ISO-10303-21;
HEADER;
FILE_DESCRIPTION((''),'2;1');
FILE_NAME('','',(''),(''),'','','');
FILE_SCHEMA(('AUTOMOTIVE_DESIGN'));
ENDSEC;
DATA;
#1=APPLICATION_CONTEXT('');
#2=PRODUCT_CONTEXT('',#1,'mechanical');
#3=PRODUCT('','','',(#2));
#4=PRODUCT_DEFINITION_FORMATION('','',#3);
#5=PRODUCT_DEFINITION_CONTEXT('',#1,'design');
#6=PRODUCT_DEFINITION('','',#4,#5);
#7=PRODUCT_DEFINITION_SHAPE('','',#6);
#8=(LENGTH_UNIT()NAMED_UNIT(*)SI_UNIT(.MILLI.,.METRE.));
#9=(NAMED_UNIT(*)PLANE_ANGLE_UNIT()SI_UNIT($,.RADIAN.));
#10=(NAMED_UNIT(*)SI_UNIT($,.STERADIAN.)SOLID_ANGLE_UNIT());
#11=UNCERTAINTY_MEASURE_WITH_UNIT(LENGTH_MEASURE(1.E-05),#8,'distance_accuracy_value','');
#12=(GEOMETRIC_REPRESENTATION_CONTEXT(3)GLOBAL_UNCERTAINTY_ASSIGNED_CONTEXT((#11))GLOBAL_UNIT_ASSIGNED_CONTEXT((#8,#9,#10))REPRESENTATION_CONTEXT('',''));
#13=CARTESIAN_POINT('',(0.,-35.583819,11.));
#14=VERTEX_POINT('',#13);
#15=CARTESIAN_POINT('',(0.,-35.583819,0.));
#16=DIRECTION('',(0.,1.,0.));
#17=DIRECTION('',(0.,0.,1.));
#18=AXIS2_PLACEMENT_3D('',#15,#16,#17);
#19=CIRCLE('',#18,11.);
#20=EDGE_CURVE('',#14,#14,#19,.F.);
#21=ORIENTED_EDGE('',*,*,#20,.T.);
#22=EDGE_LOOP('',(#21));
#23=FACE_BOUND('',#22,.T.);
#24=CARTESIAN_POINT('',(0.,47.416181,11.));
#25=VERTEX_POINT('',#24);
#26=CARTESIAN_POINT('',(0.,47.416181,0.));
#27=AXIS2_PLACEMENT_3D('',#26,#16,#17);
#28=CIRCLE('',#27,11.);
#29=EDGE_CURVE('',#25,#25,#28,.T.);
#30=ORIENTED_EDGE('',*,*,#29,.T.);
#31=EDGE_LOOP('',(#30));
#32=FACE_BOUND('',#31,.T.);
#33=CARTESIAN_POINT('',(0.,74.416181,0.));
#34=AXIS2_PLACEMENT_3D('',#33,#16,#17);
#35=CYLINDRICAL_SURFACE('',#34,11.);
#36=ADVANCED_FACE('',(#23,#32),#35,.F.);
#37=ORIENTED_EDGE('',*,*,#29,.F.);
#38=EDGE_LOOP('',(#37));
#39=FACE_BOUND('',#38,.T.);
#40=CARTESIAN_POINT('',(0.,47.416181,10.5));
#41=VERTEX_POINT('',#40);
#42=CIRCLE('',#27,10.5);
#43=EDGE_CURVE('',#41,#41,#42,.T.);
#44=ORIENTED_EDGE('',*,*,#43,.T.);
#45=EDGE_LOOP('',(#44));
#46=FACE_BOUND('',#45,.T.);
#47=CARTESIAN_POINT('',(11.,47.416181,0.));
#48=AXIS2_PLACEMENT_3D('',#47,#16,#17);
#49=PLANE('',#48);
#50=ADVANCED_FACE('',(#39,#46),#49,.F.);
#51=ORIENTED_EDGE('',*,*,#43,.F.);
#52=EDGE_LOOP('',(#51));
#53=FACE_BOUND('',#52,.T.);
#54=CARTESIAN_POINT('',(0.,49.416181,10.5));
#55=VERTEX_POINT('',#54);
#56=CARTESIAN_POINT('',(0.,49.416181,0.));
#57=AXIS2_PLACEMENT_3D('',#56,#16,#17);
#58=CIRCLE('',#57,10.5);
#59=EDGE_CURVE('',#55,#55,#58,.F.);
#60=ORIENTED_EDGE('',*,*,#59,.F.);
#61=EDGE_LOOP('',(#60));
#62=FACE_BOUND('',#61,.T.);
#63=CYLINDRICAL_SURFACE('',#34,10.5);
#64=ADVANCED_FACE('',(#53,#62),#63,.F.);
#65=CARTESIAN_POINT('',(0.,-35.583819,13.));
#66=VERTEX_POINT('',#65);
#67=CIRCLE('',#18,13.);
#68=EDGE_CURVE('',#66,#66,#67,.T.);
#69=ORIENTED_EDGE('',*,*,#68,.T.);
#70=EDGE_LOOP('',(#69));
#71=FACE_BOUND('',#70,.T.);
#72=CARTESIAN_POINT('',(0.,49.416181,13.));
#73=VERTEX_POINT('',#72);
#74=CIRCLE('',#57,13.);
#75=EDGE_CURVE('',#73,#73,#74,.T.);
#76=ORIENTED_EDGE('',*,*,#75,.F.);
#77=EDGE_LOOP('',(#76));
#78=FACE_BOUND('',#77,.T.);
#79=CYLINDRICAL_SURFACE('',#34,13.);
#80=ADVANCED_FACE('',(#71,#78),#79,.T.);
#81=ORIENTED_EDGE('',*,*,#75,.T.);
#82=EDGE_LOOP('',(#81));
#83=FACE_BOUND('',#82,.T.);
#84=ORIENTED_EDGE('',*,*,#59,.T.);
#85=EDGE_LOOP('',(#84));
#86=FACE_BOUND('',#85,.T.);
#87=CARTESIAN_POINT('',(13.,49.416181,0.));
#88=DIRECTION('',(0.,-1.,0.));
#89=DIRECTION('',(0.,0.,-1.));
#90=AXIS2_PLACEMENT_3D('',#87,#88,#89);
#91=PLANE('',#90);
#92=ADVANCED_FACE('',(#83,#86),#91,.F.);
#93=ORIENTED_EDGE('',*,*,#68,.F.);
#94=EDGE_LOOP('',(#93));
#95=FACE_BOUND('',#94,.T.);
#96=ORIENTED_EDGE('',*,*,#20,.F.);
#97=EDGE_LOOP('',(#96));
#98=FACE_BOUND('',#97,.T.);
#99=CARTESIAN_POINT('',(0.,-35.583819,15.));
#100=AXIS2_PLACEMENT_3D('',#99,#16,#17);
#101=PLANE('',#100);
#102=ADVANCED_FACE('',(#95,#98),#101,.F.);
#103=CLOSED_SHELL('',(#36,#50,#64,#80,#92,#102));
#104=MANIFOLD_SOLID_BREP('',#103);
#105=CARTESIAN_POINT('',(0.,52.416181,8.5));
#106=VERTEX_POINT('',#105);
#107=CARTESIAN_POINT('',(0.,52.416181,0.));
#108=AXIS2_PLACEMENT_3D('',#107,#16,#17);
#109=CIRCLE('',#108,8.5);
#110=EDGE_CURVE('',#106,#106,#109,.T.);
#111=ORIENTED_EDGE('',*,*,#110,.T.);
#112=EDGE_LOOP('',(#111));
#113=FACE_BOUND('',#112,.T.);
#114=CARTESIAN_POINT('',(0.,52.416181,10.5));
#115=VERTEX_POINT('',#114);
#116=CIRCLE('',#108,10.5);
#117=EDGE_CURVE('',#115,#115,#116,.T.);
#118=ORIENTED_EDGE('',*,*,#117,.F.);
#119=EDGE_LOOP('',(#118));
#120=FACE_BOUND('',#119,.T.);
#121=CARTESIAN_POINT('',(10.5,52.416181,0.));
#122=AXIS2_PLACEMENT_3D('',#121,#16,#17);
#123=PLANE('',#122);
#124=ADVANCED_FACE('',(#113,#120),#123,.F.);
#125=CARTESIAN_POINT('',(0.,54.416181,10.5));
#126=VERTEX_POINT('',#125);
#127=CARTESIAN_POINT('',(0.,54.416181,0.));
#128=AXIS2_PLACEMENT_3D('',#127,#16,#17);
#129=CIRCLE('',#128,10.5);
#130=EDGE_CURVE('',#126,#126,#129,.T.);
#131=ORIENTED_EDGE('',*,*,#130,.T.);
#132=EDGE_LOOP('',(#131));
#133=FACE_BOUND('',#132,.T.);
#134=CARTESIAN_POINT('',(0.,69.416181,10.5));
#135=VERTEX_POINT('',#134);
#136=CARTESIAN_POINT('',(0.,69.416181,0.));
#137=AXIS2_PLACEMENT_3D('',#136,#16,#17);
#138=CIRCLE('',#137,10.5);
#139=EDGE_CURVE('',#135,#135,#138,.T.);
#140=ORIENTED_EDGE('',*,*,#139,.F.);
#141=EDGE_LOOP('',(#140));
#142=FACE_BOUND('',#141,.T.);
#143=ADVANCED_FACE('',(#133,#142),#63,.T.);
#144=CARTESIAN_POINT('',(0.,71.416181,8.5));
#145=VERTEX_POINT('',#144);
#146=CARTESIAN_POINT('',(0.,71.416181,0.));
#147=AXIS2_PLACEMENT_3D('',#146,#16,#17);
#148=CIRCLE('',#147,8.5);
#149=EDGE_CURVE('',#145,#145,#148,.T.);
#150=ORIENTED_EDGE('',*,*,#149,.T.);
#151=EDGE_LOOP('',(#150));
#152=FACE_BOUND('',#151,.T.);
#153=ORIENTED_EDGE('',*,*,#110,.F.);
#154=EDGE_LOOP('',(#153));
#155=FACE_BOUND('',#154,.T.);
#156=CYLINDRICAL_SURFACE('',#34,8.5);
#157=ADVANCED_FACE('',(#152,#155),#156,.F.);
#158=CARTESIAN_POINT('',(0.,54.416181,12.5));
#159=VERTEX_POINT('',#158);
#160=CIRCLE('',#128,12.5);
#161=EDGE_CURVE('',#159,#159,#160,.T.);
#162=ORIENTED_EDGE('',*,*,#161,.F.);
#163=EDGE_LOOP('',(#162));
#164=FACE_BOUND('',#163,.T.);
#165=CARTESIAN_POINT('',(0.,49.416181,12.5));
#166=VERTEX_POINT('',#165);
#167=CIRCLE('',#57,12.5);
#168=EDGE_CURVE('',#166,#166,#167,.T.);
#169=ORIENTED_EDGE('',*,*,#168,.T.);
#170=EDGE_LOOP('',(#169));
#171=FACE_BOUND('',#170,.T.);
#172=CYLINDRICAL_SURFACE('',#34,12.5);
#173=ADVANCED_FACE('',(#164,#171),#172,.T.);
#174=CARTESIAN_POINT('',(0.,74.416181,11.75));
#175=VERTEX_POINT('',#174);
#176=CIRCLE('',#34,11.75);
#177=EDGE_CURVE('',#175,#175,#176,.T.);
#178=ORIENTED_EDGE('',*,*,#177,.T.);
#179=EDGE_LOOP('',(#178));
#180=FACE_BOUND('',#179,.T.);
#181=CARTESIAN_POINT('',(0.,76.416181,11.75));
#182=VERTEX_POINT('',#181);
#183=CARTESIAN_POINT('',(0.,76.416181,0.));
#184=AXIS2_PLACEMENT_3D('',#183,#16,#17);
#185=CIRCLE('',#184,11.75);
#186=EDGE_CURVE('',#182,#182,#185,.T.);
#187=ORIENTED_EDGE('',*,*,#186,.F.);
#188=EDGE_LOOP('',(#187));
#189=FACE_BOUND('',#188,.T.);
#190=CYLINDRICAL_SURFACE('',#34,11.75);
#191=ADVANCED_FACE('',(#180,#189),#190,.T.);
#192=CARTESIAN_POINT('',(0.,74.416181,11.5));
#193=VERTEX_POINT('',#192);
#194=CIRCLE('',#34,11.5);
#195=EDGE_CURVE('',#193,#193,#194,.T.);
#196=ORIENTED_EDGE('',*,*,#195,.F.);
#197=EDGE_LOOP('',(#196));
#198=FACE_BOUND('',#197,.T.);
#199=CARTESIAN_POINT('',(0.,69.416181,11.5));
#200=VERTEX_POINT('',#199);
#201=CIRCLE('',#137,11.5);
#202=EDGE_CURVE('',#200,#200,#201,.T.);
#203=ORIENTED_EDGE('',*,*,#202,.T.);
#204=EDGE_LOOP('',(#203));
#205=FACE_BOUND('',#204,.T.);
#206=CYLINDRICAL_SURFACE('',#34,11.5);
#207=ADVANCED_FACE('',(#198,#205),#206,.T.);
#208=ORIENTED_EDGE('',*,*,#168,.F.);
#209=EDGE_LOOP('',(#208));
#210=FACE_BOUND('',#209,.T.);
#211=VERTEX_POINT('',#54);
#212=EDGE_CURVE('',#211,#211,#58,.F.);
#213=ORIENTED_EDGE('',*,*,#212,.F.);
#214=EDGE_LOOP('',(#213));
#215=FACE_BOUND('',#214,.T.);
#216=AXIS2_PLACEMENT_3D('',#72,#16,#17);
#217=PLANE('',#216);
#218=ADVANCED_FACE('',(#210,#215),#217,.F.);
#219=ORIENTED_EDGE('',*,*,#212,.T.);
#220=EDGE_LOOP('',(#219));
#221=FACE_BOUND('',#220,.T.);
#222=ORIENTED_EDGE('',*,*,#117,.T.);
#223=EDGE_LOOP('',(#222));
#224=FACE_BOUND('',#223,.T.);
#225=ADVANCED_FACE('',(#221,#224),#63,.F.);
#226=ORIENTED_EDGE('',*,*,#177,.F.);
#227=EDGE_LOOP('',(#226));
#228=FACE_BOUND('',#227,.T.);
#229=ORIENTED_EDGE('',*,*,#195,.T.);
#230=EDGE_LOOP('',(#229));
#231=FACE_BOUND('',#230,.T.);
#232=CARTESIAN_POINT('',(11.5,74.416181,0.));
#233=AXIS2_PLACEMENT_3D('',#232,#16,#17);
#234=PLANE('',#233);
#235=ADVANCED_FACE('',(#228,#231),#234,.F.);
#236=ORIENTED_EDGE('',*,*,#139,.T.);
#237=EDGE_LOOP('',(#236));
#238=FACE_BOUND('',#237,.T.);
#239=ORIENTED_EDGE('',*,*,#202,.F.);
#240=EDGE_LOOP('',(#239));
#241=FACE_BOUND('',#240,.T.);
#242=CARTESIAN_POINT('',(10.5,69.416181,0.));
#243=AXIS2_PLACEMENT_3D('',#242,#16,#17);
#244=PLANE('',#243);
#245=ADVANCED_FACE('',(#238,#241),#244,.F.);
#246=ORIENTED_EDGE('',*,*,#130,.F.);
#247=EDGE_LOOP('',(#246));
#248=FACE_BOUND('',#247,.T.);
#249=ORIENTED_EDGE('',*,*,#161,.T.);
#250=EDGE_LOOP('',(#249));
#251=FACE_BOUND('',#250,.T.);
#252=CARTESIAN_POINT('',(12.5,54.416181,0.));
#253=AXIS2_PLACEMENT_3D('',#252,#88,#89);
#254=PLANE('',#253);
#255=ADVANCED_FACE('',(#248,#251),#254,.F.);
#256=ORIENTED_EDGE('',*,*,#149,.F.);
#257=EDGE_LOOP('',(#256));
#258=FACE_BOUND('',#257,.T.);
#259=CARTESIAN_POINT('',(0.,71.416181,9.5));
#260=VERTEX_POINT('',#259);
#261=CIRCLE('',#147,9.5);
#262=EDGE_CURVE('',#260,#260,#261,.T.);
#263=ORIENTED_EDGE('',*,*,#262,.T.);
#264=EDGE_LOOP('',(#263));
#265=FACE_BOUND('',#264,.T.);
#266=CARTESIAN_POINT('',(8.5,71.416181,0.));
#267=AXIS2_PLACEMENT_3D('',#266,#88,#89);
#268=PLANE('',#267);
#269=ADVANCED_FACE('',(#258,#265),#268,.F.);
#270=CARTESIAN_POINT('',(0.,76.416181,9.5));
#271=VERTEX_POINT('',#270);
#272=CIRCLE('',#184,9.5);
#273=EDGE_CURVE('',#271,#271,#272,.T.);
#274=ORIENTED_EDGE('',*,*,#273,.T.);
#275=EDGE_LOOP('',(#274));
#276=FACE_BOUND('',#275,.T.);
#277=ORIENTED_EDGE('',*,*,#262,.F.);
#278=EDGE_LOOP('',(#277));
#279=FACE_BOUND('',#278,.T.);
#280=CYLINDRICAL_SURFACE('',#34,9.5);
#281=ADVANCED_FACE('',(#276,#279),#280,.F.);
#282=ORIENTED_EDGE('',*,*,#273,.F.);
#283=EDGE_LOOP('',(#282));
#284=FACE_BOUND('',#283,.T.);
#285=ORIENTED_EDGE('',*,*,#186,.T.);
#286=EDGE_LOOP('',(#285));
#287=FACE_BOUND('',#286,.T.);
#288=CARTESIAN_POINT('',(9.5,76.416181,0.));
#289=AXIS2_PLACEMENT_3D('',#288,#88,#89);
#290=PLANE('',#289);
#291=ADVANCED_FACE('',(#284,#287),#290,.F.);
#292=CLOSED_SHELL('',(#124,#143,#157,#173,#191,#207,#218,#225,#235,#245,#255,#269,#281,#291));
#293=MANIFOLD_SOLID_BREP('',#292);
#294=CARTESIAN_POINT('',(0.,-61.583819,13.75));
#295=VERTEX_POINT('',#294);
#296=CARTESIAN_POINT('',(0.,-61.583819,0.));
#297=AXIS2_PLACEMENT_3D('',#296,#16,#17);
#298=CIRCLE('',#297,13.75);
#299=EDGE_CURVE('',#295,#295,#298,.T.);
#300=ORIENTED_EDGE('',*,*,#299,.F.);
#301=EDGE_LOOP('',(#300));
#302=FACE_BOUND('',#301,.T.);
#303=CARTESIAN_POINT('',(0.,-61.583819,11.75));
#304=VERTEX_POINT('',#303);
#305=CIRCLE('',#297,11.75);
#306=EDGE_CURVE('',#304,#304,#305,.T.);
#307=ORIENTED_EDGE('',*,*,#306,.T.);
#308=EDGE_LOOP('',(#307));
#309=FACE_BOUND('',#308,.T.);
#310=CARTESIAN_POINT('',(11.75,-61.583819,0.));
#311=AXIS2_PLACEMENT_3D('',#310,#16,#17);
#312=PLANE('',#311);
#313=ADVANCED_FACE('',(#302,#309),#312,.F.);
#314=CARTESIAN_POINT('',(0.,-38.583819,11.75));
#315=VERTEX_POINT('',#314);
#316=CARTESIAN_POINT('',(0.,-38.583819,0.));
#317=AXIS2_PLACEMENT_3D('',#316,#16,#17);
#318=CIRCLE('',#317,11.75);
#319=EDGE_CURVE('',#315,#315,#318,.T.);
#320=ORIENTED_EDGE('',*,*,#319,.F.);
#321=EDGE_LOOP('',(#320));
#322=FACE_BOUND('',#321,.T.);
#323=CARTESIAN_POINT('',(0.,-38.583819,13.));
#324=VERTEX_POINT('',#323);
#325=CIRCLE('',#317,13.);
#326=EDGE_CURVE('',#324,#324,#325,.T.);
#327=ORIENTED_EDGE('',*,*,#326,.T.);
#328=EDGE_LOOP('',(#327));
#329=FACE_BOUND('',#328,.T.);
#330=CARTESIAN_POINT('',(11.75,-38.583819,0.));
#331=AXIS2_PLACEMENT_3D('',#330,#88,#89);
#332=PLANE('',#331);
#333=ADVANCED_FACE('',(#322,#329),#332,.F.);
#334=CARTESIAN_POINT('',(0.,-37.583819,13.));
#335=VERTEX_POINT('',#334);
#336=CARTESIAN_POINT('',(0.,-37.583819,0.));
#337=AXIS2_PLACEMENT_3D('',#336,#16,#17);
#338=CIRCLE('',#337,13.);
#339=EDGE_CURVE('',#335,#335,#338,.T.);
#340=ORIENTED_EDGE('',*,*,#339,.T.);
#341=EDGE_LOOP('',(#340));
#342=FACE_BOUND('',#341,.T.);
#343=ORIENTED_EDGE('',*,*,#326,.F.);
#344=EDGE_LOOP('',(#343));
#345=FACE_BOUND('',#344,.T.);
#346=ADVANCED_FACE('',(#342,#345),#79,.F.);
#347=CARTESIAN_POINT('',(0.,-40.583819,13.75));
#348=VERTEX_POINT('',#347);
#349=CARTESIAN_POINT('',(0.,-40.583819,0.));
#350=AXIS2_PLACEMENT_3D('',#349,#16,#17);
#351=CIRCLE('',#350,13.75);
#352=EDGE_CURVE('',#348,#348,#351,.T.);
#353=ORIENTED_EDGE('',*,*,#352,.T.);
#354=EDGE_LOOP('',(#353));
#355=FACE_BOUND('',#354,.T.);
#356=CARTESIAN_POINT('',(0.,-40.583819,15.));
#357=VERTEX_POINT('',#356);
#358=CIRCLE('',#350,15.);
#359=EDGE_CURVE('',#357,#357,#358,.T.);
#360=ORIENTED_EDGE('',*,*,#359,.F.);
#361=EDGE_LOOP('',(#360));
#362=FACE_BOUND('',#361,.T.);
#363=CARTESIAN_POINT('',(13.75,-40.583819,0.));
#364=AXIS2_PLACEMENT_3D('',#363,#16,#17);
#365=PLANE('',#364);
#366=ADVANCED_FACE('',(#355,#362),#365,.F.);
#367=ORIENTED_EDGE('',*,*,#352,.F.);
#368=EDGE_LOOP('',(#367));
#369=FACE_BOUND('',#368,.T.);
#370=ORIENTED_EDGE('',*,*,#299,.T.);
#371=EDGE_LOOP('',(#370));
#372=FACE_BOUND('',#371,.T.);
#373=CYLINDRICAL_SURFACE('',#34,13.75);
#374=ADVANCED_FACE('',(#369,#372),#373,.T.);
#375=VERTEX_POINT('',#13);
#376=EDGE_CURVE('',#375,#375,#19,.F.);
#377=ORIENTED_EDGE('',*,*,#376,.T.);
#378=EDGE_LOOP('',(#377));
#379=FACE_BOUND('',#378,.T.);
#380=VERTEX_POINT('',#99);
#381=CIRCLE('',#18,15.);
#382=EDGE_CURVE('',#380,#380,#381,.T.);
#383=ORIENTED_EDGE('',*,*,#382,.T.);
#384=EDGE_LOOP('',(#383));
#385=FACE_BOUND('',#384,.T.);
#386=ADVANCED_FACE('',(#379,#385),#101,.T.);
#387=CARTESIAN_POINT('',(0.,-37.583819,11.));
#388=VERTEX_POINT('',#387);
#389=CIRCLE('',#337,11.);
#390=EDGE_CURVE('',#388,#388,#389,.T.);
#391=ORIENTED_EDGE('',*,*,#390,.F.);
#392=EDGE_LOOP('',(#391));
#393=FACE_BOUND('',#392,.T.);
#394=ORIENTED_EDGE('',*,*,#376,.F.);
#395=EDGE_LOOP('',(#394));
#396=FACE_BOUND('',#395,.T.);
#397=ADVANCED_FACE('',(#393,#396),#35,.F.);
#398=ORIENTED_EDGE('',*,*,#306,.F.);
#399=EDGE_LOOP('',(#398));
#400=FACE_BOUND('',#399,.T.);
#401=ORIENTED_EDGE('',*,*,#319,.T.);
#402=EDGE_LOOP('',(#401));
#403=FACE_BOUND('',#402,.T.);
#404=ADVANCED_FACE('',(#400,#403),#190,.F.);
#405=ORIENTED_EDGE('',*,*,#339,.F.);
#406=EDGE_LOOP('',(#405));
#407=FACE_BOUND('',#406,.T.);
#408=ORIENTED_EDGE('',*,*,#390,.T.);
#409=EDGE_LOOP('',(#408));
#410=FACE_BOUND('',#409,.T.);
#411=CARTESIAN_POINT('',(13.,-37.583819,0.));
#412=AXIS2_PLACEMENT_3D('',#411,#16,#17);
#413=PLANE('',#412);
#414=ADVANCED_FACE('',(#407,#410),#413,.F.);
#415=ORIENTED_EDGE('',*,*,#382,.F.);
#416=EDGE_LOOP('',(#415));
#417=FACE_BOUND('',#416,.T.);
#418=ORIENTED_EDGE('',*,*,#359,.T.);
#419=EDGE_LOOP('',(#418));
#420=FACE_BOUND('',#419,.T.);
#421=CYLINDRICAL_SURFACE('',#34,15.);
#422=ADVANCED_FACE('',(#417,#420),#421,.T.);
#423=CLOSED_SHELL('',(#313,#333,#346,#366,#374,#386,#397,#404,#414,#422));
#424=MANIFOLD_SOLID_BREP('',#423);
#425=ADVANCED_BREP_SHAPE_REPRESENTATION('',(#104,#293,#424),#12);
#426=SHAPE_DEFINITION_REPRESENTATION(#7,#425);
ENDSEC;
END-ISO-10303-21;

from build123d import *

# Parameters (mm, degrees)
PARTIR1_START         = -61.583819077
PARTIR1_OUTLINE_R     = 13.75
PARTIR1_OUTLINE_R_2   = 11.75
PARTIR1_DEPTH         = 23
PARTIR1_START_2       = -40.583819077
PARTIR1_2_OUTLINE_R   = 15
PARTIR1_2_OUTLINE_R_2 = 13
PARTIR1_2_DEPTH       = 5
PARTIR1_START_3       = -37.583819077
PARTIR1_3_OUTLINE_R   = 13
PARTIR1_3_OUTLINE_R_2 = 11
PARTIR1_3_DEPTH       = 2
PARTIR1_4_OUTLINE_R   = 15
PARTIR1_4_OUTLINE_R_2 = 10.5
PARTIR1_4_DEPTH       = 111
PARTIR1_START_4       = -35.583819077
PARTIR1_5_OUTLINE_R   = 13
PARTIR1_5_OUTLINE_R_2 = 11
PARTIR1_5_DEPTH       = 85
PARTIR1_START_5       = 47.416180923
PARTIR1_6_OUTLINE_R   = 11
PARTIR1_6_OUTLINE_R_2 = 10.5
PARTIR1_6_DEPTH       = 2


# Read off the part's stored shape, not the designer's step: Partir1
with BuildPart() as part:
    # Croquis1 → Revolución1 (revolve)
    with BuildSketch(Plane.XY, mode=Mode.PRIVATE) as revoluci_n1_sk:
        Polygon((11.75, -61.583819077), (13.75, -61.583819077), (13.75, -40.583819077), (15, -40.583819077), (15, -35.583819077), (13, -35.583819077), (13, 49.416180923), (12.5, 49.416180923), (12.5, 54.416180923), (10.5, 54.416180923), (10.5, 69.416180923), (11.5, 69.416180923), (11.5, 74.416180923), (11.75, 74.416180923), (11.75, 76.416180923), (9.5, 76.416180923), (9.5, 71.416180923), (8.5, 71.416180923), (8.5, 52.416180923), (10.5, 52.416180923), (10.5, 47.416180923), (11, 47.416180923), (11, -37.583819077), (13, -37.583819077), (13, -38.583819077), (11.75, -38.583819077), (11.75, -59.583819077), align=None)
    revolve(revoluci_n1_sk.sketch.rotate(Axis((0, 74.416180923, 0), (0, -1, 0)), 90), axis=Axis((0, 74.416180923, 0), (0, -1, 0)))

    # Partir1 4 outline → Partir1 4 (cut)
    with BuildSketch(Plane(origin=(0, 0, 0), x_dir=(1, 0, 0), z_dir=(0, 1, 0)).offset(PARTIR1_START)):
        Circle(PARTIR1_4_OUTLINE_R)
        Circle(PARTIR1_4_OUTLINE_R_2, mode=Mode.SUBTRACT)
    extrude(amount=PARTIR1_4_DEPTH, mode=Mode.SUBTRACT)


with BuildPart() as body_2:
    # Partir1 outline → Partir1 (new body)
    with BuildSketch(Plane(origin=(0, 0, 0), x_dir=(1, 0, 0), z_dir=(0, 1, 0)).offset(PARTIR1_START)):
        Circle(PARTIR1_OUTLINE_R)
        Circle(PARTIR1_OUTLINE_R_2, mode=Mode.SUBTRACT)
    extrude(amount=PARTIR1_DEPTH)

    # Partir1 2 outline → Partir1 2 (add)
    with BuildSketch(Plane(origin=(0, 0, 0), x_dir=(1, 0, 0), z_dir=(0, 1, 0)).offset(PARTIR1_START_2)):
        Circle(PARTIR1_2_OUTLINE_R)
        Circle(PARTIR1_2_OUTLINE_R_2, mode=Mode.SUBTRACT)
    extrude(amount=PARTIR1_2_DEPTH)

    # Partir1 3 outline → Partir1 3 (add)
    with BuildSketch(Plane(origin=(0, 0, 0), x_dir=(1, 0, 0), z_dir=(0, 1, 0)).offset(PARTIR1_START_3)):
        Circle(PARTIR1_3_OUTLINE_R)
        Circle(PARTIR1_3_OUTLINE_R_2, mode=Mode.SUBTRACT)
    extrude(amount=PARTIR1_3_DEPTH)


with BuildPart() as body_3:
    # Partir1 5 outline → Partir1 5 (new body)
    with BuildSketch(Plane(origin=(0, 0, 0), x_dir=(1, 0, 0), z_dir=(0, 1, 0)).offset(PARTIR1_START_4)):
        Circle(PARTIR1_5_OUTLINE_R)
        Circle(PARTIR1_5_OUTLINE_R_2, mode=Mode.SUBTRACT)
    extrude(amount=PARTIR1_5_DEPTH)

    # Partir1 6 outline → Partir1 6 (add)
    with BuildSketch(Plane(origin=(0, 0, 0), x_dir=(1, 0, 0), z_dir=(0, 1, 0)).offset(PARTIR1_START_5)):
        Circle(PARTIR1_6_OUTLINE_R)
        Circle(PARTIR1_6_OUTLINE_R_2, mode=Mode.SUBTRACT)
    extrude(amount=PARTIR1_6_DEPTH)


solid = Compound([part.part, body_2.part, body_3.part])
